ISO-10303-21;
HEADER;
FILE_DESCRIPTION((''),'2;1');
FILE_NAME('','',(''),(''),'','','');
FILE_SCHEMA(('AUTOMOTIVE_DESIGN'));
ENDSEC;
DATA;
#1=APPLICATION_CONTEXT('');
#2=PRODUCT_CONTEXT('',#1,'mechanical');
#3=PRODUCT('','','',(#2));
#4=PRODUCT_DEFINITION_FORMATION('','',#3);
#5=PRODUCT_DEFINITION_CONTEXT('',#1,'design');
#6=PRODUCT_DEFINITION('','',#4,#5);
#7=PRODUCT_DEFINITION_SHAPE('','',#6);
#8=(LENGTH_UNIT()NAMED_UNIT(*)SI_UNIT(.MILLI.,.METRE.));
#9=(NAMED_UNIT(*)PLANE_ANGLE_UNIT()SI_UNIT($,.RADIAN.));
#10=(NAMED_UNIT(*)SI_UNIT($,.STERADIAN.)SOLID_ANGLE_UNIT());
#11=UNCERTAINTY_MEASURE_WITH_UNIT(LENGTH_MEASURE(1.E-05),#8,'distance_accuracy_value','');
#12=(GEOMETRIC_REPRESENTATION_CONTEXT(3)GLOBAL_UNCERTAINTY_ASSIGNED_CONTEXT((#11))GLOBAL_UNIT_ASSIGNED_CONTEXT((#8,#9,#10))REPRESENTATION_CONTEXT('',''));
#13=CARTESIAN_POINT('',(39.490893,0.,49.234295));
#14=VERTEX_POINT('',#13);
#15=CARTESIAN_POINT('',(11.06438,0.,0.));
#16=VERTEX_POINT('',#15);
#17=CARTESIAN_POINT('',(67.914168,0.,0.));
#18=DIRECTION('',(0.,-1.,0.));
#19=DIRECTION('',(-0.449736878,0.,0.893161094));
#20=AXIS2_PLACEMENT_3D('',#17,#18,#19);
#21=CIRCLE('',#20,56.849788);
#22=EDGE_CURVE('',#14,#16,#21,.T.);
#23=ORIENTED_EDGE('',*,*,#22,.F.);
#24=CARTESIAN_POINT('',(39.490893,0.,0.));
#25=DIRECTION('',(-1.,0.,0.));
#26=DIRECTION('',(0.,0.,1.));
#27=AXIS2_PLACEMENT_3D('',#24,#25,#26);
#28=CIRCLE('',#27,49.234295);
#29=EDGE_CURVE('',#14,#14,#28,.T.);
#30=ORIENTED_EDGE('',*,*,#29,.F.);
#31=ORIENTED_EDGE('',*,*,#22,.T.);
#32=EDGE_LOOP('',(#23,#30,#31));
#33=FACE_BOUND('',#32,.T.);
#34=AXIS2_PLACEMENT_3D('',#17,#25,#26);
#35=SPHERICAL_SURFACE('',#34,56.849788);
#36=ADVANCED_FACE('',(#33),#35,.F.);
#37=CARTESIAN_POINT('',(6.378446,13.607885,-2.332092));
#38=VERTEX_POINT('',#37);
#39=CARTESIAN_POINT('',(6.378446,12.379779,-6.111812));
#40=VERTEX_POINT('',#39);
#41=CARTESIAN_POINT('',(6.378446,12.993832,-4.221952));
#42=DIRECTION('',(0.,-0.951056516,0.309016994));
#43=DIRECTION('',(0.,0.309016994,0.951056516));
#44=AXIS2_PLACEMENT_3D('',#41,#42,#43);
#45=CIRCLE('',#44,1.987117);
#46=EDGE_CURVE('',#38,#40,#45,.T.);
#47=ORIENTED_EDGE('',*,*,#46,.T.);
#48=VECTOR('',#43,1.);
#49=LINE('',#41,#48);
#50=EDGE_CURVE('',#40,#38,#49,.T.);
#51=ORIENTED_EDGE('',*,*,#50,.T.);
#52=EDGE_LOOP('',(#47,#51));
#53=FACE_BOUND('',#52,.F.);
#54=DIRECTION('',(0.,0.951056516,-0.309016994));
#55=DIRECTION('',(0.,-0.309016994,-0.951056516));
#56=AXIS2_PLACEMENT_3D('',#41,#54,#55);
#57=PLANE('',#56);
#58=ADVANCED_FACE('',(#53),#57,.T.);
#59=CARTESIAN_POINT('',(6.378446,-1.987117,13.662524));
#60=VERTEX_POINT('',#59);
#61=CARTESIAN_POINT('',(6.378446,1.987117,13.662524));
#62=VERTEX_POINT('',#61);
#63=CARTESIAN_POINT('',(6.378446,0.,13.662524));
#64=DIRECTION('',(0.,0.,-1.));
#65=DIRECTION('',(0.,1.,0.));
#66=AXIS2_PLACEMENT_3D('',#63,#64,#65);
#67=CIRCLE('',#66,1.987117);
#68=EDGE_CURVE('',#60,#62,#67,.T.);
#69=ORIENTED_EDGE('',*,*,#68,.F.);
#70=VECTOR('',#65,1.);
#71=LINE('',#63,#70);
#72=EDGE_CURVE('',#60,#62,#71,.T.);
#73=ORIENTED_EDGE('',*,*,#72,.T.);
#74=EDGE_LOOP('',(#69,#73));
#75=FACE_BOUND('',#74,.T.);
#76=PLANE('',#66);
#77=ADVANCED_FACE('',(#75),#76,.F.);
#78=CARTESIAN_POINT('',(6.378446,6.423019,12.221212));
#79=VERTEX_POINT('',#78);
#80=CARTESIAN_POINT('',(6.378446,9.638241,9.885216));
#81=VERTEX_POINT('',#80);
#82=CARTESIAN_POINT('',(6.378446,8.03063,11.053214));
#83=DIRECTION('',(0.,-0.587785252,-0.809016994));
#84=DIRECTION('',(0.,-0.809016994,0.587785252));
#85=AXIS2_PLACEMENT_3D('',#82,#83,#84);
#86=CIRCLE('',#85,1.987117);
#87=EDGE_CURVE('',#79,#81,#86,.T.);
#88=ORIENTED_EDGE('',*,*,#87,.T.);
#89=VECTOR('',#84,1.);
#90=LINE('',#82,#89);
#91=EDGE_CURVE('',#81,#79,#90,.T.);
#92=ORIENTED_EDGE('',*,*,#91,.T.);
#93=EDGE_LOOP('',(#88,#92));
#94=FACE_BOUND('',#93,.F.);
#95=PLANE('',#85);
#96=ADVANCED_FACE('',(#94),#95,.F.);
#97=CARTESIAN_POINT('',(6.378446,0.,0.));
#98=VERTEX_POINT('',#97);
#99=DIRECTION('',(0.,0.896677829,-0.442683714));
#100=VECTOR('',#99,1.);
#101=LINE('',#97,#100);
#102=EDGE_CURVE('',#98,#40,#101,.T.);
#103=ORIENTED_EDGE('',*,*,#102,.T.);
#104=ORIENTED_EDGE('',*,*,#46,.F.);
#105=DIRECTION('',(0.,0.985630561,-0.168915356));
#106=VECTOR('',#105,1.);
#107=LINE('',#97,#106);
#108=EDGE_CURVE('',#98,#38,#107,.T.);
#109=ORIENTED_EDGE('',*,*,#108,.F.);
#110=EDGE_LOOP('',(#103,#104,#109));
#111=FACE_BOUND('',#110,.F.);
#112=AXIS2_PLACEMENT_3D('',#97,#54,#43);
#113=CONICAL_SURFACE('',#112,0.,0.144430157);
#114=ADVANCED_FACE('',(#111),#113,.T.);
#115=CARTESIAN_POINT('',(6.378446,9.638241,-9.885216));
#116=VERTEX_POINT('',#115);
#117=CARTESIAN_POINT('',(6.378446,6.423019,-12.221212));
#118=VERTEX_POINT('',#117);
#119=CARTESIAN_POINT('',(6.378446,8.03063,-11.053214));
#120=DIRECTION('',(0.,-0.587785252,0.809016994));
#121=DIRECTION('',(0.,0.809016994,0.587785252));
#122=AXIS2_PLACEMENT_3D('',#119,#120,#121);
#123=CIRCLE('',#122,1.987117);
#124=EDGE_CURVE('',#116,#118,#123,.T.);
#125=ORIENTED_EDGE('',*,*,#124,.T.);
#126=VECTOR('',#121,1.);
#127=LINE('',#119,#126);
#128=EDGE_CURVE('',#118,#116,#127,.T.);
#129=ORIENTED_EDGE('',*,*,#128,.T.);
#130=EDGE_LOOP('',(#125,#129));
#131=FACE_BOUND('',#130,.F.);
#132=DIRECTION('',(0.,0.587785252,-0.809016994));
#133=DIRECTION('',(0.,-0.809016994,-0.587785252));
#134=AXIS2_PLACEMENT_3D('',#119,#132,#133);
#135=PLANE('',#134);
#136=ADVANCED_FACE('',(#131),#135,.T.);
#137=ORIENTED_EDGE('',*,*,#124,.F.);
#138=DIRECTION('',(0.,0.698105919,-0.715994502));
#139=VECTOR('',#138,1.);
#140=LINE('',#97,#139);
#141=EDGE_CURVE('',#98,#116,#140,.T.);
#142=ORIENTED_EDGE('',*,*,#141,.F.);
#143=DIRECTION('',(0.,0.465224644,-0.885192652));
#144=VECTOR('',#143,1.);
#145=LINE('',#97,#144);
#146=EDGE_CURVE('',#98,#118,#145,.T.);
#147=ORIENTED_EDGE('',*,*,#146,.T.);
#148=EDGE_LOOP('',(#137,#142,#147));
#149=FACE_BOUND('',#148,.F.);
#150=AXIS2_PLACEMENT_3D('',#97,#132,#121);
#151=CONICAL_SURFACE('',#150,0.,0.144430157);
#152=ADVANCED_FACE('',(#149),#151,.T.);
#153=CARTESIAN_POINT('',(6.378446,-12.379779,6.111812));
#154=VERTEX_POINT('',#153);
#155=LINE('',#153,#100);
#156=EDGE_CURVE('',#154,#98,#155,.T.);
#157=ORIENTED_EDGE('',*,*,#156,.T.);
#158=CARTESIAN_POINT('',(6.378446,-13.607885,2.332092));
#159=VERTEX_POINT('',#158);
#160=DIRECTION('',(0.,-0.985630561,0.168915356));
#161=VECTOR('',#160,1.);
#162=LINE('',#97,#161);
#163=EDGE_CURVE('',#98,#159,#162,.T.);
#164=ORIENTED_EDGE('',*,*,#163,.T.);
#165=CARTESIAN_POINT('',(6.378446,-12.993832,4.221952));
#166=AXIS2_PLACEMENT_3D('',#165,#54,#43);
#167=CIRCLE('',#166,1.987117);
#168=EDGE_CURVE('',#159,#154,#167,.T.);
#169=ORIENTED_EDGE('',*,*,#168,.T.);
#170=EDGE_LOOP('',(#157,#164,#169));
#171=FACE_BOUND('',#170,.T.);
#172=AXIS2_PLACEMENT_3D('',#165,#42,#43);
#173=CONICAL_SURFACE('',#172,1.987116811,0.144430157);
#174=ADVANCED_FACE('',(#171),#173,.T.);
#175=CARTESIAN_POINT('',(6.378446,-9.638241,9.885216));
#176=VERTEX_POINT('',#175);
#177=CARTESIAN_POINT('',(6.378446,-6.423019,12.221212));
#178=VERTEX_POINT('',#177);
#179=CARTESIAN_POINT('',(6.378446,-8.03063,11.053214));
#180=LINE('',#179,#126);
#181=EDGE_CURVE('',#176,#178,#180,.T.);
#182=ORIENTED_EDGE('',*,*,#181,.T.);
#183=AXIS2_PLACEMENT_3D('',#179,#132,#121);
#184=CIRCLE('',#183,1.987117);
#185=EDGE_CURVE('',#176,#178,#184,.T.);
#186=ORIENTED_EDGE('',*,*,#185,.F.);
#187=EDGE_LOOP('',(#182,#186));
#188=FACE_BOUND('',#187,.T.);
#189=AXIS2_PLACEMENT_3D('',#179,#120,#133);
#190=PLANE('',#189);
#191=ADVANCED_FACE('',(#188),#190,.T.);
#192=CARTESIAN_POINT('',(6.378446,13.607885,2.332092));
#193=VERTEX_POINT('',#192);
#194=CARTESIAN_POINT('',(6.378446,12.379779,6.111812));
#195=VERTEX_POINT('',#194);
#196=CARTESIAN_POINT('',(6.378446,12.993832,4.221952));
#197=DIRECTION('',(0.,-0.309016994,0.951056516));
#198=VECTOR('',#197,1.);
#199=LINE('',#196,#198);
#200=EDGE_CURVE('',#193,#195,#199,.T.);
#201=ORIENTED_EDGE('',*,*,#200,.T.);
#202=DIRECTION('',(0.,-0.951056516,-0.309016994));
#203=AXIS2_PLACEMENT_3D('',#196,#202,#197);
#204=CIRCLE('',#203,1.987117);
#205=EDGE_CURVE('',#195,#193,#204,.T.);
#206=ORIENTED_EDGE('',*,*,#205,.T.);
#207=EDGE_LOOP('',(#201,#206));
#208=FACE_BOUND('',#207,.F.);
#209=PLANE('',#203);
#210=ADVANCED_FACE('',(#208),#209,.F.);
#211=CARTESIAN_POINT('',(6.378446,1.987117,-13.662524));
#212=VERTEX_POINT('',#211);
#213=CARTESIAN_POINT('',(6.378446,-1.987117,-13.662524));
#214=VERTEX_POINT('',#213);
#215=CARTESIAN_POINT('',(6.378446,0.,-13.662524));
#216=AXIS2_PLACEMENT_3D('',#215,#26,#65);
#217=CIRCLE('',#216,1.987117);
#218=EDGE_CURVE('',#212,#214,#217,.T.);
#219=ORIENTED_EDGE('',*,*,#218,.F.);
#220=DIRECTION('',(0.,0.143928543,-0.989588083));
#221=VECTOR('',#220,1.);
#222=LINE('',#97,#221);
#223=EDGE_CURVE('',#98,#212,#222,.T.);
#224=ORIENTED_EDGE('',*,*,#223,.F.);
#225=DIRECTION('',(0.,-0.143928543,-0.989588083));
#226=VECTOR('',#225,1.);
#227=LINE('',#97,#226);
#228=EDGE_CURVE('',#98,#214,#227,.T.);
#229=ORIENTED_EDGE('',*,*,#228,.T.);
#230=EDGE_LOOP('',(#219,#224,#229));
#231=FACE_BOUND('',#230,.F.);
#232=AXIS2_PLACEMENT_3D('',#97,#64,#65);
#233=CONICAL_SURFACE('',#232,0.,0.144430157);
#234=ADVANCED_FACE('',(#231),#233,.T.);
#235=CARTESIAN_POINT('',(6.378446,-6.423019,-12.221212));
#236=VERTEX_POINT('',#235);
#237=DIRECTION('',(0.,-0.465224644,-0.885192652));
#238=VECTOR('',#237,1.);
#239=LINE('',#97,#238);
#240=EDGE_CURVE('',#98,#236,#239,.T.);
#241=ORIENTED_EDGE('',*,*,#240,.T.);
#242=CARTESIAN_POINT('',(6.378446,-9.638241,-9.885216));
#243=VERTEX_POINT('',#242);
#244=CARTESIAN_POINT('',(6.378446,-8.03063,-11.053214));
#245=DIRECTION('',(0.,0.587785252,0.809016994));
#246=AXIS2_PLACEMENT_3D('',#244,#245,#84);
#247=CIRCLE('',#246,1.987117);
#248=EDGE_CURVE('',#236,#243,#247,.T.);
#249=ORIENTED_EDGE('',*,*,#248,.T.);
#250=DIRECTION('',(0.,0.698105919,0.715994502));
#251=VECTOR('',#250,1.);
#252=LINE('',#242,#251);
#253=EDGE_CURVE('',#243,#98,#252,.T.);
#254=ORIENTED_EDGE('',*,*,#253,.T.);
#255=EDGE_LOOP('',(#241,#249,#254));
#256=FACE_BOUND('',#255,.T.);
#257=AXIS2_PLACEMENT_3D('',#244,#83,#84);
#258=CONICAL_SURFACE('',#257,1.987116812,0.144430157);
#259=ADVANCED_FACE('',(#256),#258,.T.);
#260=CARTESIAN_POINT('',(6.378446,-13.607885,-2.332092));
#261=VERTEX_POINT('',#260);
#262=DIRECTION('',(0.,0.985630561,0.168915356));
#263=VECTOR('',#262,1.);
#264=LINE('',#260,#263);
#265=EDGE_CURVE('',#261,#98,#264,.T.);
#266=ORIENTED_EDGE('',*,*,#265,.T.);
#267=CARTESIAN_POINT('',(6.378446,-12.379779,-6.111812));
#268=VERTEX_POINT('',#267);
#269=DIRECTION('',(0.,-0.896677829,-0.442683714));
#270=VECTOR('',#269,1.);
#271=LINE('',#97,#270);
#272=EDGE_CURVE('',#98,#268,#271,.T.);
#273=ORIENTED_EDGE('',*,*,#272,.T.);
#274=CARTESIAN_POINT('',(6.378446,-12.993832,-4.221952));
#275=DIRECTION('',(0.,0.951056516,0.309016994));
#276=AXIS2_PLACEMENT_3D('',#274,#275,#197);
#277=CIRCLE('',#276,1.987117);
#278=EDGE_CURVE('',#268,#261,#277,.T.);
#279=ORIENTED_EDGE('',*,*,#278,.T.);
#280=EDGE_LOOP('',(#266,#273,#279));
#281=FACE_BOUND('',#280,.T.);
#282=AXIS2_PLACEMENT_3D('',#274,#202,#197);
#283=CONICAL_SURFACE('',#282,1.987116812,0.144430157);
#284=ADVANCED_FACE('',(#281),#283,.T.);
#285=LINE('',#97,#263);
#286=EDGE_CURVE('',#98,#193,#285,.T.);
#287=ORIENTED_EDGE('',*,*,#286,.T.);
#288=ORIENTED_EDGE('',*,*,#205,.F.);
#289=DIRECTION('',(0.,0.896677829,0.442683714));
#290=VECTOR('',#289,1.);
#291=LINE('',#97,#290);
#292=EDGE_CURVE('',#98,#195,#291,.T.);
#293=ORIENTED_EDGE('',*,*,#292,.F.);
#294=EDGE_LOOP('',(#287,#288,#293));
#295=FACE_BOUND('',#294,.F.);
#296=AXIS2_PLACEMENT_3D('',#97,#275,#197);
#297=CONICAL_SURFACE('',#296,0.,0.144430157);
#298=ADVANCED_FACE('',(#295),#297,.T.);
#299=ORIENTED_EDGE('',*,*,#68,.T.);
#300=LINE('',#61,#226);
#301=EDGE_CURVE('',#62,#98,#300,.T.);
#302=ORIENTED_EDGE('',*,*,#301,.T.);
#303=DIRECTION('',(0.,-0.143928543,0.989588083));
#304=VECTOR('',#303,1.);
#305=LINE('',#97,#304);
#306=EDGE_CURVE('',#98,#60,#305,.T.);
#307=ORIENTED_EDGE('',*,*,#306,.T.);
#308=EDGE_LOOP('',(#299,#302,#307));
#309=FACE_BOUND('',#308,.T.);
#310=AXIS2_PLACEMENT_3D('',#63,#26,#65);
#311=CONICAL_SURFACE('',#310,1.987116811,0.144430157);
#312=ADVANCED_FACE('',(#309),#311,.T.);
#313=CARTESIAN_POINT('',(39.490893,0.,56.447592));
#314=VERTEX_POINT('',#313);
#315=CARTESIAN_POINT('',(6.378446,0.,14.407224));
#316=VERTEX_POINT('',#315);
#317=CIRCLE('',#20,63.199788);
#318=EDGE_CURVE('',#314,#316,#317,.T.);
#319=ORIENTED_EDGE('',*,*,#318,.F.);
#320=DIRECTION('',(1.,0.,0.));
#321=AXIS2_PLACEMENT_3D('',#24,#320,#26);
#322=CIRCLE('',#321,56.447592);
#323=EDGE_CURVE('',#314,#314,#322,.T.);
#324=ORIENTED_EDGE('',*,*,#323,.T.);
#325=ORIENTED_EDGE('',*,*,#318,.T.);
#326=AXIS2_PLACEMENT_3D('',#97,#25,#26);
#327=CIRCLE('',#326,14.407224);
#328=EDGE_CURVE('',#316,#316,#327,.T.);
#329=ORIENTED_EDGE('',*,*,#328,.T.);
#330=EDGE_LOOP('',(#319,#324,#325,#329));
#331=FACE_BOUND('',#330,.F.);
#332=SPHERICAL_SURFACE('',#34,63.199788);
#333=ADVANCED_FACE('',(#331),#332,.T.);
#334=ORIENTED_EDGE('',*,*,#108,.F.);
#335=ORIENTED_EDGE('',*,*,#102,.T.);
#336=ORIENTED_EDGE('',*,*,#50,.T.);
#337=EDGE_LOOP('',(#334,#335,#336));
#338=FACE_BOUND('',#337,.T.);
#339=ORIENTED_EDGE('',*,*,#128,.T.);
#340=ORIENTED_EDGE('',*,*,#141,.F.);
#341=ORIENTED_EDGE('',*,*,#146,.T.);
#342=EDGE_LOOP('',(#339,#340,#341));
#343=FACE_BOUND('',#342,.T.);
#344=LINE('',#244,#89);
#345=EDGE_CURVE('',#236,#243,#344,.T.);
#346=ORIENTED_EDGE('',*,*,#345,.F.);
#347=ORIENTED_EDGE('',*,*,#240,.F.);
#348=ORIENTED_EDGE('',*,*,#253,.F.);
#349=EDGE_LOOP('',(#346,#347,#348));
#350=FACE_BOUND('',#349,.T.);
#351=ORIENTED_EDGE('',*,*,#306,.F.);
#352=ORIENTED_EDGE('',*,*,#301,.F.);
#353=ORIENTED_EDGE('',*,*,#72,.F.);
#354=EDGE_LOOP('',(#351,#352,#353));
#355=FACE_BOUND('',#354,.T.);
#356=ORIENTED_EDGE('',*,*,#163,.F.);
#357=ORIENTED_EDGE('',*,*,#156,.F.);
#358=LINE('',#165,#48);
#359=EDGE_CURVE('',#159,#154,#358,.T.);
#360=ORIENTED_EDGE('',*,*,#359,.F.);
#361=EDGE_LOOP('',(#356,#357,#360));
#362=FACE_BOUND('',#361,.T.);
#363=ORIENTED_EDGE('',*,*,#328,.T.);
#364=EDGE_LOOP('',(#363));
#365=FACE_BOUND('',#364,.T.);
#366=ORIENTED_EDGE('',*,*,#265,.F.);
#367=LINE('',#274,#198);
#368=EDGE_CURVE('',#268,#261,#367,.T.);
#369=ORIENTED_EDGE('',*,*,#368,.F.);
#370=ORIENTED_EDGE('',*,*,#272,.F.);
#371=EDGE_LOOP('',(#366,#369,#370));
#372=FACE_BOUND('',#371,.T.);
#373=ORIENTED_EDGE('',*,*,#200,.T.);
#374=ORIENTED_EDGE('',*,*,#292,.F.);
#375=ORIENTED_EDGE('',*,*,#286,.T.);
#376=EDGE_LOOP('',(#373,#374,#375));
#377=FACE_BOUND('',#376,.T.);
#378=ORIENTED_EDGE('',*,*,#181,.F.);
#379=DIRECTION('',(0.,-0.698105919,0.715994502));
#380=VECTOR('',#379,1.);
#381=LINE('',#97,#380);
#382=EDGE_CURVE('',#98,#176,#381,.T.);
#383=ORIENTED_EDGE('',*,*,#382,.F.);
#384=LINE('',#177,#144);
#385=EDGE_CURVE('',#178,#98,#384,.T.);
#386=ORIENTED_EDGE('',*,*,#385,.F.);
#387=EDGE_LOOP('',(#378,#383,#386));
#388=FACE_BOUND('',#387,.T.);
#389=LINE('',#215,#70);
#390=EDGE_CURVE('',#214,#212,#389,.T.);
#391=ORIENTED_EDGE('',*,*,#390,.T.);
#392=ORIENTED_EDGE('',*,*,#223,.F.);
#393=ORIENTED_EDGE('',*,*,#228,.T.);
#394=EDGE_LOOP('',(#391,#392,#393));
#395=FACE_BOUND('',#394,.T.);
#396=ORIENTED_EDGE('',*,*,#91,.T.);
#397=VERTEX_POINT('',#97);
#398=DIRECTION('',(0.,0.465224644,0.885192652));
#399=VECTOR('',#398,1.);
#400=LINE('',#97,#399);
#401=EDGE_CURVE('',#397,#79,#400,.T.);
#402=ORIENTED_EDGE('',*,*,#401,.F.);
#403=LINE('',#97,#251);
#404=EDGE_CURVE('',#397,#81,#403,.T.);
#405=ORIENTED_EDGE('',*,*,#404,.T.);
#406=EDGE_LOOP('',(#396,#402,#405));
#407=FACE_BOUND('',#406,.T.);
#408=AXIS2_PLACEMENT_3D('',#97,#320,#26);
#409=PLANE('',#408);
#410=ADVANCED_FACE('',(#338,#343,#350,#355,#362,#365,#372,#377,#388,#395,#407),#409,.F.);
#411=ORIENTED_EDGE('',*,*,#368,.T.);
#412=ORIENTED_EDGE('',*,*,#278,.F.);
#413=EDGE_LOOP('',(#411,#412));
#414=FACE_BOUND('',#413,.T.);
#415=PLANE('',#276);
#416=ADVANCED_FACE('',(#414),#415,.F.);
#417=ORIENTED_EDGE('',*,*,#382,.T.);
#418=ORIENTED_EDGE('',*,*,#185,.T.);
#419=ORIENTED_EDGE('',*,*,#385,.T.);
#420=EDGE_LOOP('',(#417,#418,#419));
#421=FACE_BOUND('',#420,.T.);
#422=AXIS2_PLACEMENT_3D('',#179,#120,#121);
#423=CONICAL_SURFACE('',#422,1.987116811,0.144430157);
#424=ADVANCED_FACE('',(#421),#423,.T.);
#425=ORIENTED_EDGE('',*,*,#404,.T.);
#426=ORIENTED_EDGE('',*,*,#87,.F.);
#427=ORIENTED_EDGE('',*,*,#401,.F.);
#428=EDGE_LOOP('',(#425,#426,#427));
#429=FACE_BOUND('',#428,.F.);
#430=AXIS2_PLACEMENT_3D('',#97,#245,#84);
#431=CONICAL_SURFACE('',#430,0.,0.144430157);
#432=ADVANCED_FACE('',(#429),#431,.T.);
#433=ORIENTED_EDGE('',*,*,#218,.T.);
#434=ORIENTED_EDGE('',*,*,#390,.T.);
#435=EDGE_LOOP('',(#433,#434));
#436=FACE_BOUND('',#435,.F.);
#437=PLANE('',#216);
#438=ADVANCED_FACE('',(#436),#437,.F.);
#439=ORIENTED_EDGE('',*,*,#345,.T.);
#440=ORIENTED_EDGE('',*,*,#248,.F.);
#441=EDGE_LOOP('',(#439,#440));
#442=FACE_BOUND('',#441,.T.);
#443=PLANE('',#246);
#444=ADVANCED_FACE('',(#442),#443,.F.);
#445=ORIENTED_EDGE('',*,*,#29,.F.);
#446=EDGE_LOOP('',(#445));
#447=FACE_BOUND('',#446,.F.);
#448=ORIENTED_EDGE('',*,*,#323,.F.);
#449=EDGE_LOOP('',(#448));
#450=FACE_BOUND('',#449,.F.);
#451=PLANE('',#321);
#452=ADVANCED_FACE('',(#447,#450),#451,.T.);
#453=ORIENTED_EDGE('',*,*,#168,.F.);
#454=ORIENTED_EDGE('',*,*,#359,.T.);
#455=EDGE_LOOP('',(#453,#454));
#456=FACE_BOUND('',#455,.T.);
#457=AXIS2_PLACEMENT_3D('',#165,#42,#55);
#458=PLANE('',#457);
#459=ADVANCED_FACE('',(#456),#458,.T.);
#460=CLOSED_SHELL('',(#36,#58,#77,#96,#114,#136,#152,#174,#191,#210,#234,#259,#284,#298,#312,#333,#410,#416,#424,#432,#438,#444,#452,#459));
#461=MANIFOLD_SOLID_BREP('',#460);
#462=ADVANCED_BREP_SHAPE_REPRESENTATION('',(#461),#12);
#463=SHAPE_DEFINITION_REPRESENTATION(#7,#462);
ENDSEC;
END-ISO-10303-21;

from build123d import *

# Parameters (mm, degrees)
F2_T = -6.35
F3_W = 12.7568915486
F3_H = 15.9924589097


# Not quite as in the source:
# - a feature names something its author has since deleted; it is built from what else it names


with BuildPart() as f1:
    # F0 (on Front) → F1 (revolve)
    with BuildSketch(Plane.XZ):
        with BuildLine():
            Line((39.4908925979, 0), (39.4908925979, 56.4475917369))
            ThreePointArc((39.4908925979, 56.4475917369), (14.1063703184, 33.1501751178), (4.71438, 0))
            Line((4.71438, 0), (39.4908925979, 0))
        make_face()
    revolve(axis=Axis((0, 0, 0), (1, 0, 0)))

    # F2
    f2_openings = [f1.faces().sort_by_distance(p)[0] for p in [
        (39.490893, 0, 0),
    ]]
    offset(amount=F2_T, openings=f2_openings)

    # F3 (on Front) → F4 (revolve, cut)
    with BuildSketch(Plane.XZ):
        with Locations((0, 7.9962294549)):
            Rectangle(F3_W, F3_H)
    revolve(axis=Axis((0, 0, 0), (1, 0, 0)), mode=Mode.SUBTRACT)

    # F5 (on face) → F6 (revolve)
    with BuildSketch(Plane(origin=(6.3784457743, 0, 0), x_dir=(0, -1, 0), z_dir=(-1, 0, 0))):
        Polygon((-1.9871168115, 13.66252359), (0, 0), (0, 13.66252359), align=None)
    revolve(axis=Axis((6.3784457743, 0, 6.831261795), (0, 0, -1)))

    # F5 (on face) → F7 (revolve)
    with BuildSketch(Plane(origin=(6.3784457743, 0, 0), x_dir=(0, -1, 0), z_dir=(-1, 0, 0))):
        Polygon((-8.0306298753, 11.0532137704), (0, 0), (-6.423018605, 12.2212117268), align=None)
    revolve(axis=Axis((6.3784457743, 4.0153149377, 5.5266068852), (0, -0.5877852523, -0.8090169944)))

    # F5 (on face) → F8 (revolve)
    with BuildSketch(Plane(origin=(6.3784457743, 0, 0), x_dir=(0, -1, 0), z_dir=(-1, 0, 0))):
        Polygon((-12.9938320893, 4.2219519754), (0, 0), (-12.3797792248, 6.1118123676), align=None)
    revolve(axis=Axis((6.3784457743, 6.4969160447, 2.1109759877), (0, -0.9510565163, -0.3090169944)))

    # F5 (on face) → F9 (revolve)
    with BuildSketch(Plane(origin=(6.3784457743, 0, 0), x_dir=(0, -1, 0), z_dir=(-1, 0, 0))):
        Polygon((-12.9938320893, -4.2219519754), (0, 0), (-13.6078849539, -2.3320915832), align=None)
    revolve(axis=Axis((6.3784457743, 6.4969160447, -2.1109759877), (0, -0.9510565163, 0.3090169944)))

    # F5 (on face) → F10 (revolve)
    with BuildSketch(Plane(origin=(6.3784457743, 0, 0), x_dir=(0, -1, 0), z_dir=(-1, 0, 0))):
        Polygon((-8.0306298753, -11.0532137704), (0, 0), (-9.6382411456, -9.885215814), align=None)
    revolve(axis=Axis((6.3784457743, 4.0153149377, -5.5266068852), (0, -0.5877852523, 0.8090169944)))

    # F5 (on face) → F11 (revolve)
    with BuildSketch(Plane(origin=(6.3784457743, 0, 0), x_dir=(0, -1, 0), z_dir=(-1, 0, 0))):
        Polygon((0, -13.66252359), (0, 0), (-1.9871168115, -13.66252359), align=None)
    revolve(axis=Axis((6.3784457743, 0, -6.831261795), (0, 0, 1)))

    # F5 (on face) → F12 (revolve)
    with BuildSketch(Plane(origin=(6.3784457743, 0, 0), x_dir=(0, -1, 0), z_dir=(-1, 0, 0))):
        Polygon((6.423018605, 12.2212117268), (0, 0), (8.0306298753, 11.0532137704), align=None)
    revolve(axis=Axis((6.3784457743, -4.0153149377, 5.5266068852), (0, 0.5877852523, -0.8090169944)))

    # F5 (on face) → F13 (revolve)
    with BuildSketch(Plane(origin=(6.3784457743, 0, 0), x_dir=(0, -1, 0), z_dir=(-1, 0, 0))):
        Polygon((12.3797792248, 6.1118123676), (0, 0), (12.9938320893, 4.2219519754), align=None)
    revolve(axis=Axis((6.3784457743, -6.4969160447, 2.1109759877), (0, 0.9510565163, -0.3090169944)))

    # F5 (on face) → F14 (revolve)
    with BuildSketch(Plane(origin=(6.3784457743, 0, 0), x_dir=(0, -1, 0), z_dir=(-1, 0, 0))):
        Polygon((13.6078849539, -2.3320915832), (0, 0), (12.9938320893, -4.2219519754), align=None)
    revolve(axis=Axis((6.3784457743, -6.4969160447, -2.1109759877), (0, 0.9510565163, 0.3090169944)))

    # F5 (on face) → F15 (revolve)
    with BuildSketch(Plane(origin=(6.3784457743, 0, 0), x_dir=(0, -1, 0), z_dir=(-1, 0, 0))):
        Polygon((9.6382411456, -9.885215814), (0, 0), (8.0306298753, -11.0532137704), align=None)
    revolve(axis=Axis((6.3784457743, -4.0153149377, -5.5266068852), (0, 0.5877852523, 0.8090169944)))


solid = f1.part
